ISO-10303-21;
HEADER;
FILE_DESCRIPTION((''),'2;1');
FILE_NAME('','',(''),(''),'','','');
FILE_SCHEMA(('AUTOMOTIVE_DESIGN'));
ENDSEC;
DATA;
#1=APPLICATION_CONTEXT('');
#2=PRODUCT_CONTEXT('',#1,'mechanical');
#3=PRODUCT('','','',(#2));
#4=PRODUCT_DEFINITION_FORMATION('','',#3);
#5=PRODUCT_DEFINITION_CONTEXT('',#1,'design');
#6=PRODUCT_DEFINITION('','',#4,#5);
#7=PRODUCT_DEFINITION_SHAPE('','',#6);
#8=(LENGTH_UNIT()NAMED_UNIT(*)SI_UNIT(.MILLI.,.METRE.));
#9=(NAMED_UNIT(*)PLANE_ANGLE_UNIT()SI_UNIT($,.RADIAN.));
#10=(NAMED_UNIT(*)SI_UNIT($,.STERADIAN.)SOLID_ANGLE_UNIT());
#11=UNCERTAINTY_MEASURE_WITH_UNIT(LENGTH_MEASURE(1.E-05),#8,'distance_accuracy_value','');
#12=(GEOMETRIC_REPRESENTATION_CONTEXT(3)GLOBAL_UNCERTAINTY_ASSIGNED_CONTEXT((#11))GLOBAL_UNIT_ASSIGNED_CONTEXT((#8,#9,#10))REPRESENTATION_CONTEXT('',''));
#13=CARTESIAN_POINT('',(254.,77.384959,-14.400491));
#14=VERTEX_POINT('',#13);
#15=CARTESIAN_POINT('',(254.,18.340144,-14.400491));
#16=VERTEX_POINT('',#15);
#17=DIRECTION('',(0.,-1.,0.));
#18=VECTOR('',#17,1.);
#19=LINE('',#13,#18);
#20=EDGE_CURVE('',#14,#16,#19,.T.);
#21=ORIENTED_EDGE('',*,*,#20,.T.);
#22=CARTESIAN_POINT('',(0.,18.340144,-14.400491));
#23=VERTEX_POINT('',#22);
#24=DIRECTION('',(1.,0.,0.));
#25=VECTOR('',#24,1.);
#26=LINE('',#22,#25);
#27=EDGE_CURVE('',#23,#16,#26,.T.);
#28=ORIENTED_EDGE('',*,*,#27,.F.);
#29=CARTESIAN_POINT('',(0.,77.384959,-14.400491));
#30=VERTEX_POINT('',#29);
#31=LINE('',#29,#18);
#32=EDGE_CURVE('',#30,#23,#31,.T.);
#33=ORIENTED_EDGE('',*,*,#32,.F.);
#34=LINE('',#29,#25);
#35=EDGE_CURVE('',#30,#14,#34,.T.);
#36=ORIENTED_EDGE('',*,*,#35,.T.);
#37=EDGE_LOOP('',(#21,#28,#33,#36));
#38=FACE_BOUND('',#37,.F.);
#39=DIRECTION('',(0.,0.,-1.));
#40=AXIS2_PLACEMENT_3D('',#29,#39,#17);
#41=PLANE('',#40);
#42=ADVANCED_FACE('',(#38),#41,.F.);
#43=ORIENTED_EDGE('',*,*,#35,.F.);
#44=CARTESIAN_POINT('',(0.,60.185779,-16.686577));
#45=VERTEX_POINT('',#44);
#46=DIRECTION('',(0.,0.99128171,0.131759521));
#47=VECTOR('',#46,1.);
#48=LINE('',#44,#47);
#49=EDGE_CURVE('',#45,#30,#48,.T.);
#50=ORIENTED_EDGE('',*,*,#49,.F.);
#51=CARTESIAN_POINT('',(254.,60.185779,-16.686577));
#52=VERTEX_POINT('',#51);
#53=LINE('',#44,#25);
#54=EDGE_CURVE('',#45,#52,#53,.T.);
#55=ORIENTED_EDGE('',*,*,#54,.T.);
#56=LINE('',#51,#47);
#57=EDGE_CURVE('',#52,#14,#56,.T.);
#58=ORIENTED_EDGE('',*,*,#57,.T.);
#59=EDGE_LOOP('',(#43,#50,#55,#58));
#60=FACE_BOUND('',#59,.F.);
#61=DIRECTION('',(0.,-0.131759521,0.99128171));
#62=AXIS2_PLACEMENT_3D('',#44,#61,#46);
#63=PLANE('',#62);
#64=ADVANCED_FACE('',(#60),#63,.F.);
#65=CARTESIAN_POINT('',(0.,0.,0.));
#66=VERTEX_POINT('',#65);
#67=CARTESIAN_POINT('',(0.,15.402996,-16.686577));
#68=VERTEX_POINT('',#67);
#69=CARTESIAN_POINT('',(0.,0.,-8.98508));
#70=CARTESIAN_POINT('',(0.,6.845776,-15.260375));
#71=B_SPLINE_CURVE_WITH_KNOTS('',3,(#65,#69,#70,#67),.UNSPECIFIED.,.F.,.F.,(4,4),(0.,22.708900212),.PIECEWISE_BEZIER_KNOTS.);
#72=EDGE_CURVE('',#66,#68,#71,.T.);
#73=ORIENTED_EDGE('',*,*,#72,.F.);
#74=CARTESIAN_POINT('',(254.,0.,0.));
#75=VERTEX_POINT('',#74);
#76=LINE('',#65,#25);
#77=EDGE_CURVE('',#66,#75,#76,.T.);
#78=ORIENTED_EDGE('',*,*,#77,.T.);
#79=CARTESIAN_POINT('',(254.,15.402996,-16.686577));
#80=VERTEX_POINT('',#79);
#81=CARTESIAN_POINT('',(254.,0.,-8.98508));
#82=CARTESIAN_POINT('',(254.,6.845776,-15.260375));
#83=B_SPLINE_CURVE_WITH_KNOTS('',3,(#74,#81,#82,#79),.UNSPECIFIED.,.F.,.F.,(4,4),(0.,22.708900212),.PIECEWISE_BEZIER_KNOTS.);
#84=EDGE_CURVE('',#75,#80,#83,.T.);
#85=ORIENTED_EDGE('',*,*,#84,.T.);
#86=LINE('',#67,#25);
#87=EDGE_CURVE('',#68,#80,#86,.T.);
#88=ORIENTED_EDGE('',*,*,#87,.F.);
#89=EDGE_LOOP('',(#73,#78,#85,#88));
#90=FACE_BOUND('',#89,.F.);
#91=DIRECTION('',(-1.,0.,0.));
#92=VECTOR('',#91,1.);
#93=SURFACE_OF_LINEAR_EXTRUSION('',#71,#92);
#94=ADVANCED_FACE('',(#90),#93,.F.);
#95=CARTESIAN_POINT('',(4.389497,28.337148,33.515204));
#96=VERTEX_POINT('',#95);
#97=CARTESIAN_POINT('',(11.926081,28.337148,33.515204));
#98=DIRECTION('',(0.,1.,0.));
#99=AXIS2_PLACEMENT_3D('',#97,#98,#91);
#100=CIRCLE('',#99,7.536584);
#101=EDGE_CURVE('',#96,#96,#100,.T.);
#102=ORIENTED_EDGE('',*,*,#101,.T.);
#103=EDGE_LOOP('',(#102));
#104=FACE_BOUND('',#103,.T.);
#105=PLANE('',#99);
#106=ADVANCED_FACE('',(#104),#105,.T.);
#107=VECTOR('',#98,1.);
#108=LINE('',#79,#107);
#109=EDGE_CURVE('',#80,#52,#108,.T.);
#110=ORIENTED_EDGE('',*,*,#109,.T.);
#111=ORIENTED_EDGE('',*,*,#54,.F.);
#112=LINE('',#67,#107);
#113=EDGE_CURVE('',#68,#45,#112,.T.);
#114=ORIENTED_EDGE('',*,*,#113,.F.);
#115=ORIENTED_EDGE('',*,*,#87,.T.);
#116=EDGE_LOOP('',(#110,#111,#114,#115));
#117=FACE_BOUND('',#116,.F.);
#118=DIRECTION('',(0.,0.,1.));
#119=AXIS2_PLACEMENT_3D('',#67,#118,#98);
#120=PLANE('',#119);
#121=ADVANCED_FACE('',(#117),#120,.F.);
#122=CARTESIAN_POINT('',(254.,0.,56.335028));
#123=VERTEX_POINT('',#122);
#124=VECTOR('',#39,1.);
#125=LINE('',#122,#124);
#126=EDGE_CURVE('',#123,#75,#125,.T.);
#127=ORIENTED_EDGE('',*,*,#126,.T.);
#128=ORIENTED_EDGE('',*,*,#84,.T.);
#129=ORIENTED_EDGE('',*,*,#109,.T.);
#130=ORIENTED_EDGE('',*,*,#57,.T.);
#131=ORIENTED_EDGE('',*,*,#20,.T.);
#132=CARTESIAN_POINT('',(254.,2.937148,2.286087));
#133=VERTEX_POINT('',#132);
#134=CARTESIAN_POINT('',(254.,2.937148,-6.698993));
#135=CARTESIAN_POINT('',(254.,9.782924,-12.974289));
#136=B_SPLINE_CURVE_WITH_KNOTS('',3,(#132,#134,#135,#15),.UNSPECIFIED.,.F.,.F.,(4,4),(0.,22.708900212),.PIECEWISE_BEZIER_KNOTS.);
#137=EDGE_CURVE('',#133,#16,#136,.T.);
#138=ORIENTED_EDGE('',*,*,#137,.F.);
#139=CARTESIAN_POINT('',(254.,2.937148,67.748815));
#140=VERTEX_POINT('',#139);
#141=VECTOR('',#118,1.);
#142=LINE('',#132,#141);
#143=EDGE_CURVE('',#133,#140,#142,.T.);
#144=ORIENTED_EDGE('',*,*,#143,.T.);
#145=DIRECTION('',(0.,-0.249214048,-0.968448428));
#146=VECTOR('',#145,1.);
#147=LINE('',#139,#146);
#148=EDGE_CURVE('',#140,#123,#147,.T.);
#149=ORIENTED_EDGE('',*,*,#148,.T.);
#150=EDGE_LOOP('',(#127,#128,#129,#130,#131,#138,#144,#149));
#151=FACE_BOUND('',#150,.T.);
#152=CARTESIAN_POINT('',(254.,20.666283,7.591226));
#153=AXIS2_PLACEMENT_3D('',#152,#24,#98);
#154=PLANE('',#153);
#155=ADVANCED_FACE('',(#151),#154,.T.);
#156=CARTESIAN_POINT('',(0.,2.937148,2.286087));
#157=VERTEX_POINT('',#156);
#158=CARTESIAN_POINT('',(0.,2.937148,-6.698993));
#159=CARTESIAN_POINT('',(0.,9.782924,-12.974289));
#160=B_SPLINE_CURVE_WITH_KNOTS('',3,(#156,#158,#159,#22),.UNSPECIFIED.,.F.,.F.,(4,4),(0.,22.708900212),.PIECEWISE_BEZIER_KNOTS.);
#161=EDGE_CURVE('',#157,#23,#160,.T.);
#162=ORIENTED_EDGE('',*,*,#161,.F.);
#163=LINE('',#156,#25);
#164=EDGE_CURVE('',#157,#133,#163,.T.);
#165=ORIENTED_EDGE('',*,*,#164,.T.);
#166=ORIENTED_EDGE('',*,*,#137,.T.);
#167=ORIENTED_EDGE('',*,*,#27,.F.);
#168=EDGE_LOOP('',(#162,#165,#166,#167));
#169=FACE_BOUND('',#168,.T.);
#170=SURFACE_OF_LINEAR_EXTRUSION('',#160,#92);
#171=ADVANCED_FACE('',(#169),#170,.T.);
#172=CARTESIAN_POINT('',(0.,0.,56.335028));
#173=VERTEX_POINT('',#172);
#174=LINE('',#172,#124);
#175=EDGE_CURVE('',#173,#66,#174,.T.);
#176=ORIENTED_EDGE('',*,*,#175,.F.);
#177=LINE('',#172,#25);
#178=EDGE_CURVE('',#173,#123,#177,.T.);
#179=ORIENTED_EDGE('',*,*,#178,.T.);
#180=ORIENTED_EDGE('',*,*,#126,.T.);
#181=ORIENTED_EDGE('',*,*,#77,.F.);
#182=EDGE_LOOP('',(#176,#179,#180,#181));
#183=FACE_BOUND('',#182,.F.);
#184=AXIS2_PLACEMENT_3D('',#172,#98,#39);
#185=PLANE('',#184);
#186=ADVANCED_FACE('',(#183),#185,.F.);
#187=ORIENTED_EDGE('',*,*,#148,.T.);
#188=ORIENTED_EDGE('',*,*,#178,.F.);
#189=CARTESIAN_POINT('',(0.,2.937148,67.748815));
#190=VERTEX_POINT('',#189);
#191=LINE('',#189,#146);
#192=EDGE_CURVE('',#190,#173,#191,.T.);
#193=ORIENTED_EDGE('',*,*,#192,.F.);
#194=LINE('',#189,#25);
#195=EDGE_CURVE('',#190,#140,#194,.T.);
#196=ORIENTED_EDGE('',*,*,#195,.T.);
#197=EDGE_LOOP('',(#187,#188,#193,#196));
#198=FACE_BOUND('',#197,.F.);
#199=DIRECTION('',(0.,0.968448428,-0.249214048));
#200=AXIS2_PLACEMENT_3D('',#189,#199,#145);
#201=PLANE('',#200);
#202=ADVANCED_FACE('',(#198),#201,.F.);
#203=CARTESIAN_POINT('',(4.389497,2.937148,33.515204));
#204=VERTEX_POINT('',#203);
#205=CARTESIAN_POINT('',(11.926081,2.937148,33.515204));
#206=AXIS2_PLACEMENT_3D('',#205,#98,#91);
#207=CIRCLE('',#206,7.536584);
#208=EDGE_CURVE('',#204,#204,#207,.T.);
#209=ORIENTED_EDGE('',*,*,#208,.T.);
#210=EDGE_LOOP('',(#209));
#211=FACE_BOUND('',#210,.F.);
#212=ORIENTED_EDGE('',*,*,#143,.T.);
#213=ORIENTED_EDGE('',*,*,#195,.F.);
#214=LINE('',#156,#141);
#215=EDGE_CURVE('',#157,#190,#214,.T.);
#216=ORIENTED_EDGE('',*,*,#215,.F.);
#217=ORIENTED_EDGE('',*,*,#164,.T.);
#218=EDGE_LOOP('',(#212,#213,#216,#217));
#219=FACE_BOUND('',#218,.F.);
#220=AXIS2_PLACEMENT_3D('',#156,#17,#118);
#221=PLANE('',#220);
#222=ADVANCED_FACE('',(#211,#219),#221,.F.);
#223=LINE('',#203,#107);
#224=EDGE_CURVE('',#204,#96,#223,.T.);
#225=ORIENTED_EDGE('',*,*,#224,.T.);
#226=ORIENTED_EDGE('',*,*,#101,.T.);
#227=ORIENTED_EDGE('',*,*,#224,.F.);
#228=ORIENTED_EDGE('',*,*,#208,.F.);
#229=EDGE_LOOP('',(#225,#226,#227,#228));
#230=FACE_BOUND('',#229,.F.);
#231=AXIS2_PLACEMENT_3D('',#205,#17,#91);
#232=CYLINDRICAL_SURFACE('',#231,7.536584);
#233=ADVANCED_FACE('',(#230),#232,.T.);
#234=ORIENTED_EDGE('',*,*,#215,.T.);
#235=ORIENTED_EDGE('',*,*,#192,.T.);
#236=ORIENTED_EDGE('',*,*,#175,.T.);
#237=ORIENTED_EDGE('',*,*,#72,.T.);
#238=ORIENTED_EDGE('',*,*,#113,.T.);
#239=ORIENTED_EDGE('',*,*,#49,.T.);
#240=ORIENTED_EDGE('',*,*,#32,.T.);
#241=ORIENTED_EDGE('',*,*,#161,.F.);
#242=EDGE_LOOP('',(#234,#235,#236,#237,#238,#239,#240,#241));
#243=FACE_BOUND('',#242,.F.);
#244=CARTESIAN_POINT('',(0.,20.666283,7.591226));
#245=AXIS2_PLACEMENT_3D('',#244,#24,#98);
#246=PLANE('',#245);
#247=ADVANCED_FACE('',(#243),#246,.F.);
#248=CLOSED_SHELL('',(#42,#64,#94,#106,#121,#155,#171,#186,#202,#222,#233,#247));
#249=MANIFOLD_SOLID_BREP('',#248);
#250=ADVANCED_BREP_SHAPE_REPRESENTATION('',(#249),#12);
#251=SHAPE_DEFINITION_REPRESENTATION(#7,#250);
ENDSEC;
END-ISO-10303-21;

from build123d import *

# Parameters (mm, degrees)
F1_DEPTH = 254
F2_R     = 7.5365841045
F3_DEPTH = 25.4


# Not quite as in the source:
# - the program builds the solid bodies; features that only make, move or delete a surface that nothing else refers to are left out


with BuildPart() as f1:
    # F0 (on Right) → F1 (new body)
    with BuildSketch(Plane.YZ):
        with BuildLine():
            Line((2.9371477504, 67.7488154993), (0, 56.3350282609))
            Line((0, 56.3350282609), (0, 0))
            add(Edge.make_bspline(
                [(0, 0), (0, -8.9850798249), (6.8457759917, -15.2603751048), (15.4029959813, -16.6865773499)],
                knots=[0, 0, 0, 0, 22.7089002123, 22.7089002123, 22.7089002123, 22.7089002123], degree=3))
            Line((15.4029959813, -16.6865773499), (60.1857788861, -16.6865773499))
            Line((60.1857788861, -16.6865773499), (77.3849593316, -14.4004908129))
            Line((77.3849593316, -14.4004908129), (18.3401437317, -14.4004908129))
            add(Edge.make_bspline(
                [(2.9371477504, 2.286086537), (2.9371477504, -6.6989932879), (9.7829237421, -12.9742885678), (18.3401437317, -14.4004908129)],
                knots=[0, 0, 0, 0, 22.7089002123, 22.7089002123, 22.7089002123, 22.7089002123], degree=3))
            Line((2.9371477504, 2.286086537), (2.9371477504, 67.7488154993))
        make_face()
    extrude(amount=F1_DEPTH)

    # F2 (on face) → F3 (join)
    with BuildSketch(Plane(origin=(0, 2.9371477504, 0), x_dir=(-1, 0, 0), z_dir=(0, 1, 0))):
        with Locations((-11.9260810316, 33.5152037442)):
            Circle(F2_R)
    extrude(amount=F3_DEPTH)


solid = f1.part
